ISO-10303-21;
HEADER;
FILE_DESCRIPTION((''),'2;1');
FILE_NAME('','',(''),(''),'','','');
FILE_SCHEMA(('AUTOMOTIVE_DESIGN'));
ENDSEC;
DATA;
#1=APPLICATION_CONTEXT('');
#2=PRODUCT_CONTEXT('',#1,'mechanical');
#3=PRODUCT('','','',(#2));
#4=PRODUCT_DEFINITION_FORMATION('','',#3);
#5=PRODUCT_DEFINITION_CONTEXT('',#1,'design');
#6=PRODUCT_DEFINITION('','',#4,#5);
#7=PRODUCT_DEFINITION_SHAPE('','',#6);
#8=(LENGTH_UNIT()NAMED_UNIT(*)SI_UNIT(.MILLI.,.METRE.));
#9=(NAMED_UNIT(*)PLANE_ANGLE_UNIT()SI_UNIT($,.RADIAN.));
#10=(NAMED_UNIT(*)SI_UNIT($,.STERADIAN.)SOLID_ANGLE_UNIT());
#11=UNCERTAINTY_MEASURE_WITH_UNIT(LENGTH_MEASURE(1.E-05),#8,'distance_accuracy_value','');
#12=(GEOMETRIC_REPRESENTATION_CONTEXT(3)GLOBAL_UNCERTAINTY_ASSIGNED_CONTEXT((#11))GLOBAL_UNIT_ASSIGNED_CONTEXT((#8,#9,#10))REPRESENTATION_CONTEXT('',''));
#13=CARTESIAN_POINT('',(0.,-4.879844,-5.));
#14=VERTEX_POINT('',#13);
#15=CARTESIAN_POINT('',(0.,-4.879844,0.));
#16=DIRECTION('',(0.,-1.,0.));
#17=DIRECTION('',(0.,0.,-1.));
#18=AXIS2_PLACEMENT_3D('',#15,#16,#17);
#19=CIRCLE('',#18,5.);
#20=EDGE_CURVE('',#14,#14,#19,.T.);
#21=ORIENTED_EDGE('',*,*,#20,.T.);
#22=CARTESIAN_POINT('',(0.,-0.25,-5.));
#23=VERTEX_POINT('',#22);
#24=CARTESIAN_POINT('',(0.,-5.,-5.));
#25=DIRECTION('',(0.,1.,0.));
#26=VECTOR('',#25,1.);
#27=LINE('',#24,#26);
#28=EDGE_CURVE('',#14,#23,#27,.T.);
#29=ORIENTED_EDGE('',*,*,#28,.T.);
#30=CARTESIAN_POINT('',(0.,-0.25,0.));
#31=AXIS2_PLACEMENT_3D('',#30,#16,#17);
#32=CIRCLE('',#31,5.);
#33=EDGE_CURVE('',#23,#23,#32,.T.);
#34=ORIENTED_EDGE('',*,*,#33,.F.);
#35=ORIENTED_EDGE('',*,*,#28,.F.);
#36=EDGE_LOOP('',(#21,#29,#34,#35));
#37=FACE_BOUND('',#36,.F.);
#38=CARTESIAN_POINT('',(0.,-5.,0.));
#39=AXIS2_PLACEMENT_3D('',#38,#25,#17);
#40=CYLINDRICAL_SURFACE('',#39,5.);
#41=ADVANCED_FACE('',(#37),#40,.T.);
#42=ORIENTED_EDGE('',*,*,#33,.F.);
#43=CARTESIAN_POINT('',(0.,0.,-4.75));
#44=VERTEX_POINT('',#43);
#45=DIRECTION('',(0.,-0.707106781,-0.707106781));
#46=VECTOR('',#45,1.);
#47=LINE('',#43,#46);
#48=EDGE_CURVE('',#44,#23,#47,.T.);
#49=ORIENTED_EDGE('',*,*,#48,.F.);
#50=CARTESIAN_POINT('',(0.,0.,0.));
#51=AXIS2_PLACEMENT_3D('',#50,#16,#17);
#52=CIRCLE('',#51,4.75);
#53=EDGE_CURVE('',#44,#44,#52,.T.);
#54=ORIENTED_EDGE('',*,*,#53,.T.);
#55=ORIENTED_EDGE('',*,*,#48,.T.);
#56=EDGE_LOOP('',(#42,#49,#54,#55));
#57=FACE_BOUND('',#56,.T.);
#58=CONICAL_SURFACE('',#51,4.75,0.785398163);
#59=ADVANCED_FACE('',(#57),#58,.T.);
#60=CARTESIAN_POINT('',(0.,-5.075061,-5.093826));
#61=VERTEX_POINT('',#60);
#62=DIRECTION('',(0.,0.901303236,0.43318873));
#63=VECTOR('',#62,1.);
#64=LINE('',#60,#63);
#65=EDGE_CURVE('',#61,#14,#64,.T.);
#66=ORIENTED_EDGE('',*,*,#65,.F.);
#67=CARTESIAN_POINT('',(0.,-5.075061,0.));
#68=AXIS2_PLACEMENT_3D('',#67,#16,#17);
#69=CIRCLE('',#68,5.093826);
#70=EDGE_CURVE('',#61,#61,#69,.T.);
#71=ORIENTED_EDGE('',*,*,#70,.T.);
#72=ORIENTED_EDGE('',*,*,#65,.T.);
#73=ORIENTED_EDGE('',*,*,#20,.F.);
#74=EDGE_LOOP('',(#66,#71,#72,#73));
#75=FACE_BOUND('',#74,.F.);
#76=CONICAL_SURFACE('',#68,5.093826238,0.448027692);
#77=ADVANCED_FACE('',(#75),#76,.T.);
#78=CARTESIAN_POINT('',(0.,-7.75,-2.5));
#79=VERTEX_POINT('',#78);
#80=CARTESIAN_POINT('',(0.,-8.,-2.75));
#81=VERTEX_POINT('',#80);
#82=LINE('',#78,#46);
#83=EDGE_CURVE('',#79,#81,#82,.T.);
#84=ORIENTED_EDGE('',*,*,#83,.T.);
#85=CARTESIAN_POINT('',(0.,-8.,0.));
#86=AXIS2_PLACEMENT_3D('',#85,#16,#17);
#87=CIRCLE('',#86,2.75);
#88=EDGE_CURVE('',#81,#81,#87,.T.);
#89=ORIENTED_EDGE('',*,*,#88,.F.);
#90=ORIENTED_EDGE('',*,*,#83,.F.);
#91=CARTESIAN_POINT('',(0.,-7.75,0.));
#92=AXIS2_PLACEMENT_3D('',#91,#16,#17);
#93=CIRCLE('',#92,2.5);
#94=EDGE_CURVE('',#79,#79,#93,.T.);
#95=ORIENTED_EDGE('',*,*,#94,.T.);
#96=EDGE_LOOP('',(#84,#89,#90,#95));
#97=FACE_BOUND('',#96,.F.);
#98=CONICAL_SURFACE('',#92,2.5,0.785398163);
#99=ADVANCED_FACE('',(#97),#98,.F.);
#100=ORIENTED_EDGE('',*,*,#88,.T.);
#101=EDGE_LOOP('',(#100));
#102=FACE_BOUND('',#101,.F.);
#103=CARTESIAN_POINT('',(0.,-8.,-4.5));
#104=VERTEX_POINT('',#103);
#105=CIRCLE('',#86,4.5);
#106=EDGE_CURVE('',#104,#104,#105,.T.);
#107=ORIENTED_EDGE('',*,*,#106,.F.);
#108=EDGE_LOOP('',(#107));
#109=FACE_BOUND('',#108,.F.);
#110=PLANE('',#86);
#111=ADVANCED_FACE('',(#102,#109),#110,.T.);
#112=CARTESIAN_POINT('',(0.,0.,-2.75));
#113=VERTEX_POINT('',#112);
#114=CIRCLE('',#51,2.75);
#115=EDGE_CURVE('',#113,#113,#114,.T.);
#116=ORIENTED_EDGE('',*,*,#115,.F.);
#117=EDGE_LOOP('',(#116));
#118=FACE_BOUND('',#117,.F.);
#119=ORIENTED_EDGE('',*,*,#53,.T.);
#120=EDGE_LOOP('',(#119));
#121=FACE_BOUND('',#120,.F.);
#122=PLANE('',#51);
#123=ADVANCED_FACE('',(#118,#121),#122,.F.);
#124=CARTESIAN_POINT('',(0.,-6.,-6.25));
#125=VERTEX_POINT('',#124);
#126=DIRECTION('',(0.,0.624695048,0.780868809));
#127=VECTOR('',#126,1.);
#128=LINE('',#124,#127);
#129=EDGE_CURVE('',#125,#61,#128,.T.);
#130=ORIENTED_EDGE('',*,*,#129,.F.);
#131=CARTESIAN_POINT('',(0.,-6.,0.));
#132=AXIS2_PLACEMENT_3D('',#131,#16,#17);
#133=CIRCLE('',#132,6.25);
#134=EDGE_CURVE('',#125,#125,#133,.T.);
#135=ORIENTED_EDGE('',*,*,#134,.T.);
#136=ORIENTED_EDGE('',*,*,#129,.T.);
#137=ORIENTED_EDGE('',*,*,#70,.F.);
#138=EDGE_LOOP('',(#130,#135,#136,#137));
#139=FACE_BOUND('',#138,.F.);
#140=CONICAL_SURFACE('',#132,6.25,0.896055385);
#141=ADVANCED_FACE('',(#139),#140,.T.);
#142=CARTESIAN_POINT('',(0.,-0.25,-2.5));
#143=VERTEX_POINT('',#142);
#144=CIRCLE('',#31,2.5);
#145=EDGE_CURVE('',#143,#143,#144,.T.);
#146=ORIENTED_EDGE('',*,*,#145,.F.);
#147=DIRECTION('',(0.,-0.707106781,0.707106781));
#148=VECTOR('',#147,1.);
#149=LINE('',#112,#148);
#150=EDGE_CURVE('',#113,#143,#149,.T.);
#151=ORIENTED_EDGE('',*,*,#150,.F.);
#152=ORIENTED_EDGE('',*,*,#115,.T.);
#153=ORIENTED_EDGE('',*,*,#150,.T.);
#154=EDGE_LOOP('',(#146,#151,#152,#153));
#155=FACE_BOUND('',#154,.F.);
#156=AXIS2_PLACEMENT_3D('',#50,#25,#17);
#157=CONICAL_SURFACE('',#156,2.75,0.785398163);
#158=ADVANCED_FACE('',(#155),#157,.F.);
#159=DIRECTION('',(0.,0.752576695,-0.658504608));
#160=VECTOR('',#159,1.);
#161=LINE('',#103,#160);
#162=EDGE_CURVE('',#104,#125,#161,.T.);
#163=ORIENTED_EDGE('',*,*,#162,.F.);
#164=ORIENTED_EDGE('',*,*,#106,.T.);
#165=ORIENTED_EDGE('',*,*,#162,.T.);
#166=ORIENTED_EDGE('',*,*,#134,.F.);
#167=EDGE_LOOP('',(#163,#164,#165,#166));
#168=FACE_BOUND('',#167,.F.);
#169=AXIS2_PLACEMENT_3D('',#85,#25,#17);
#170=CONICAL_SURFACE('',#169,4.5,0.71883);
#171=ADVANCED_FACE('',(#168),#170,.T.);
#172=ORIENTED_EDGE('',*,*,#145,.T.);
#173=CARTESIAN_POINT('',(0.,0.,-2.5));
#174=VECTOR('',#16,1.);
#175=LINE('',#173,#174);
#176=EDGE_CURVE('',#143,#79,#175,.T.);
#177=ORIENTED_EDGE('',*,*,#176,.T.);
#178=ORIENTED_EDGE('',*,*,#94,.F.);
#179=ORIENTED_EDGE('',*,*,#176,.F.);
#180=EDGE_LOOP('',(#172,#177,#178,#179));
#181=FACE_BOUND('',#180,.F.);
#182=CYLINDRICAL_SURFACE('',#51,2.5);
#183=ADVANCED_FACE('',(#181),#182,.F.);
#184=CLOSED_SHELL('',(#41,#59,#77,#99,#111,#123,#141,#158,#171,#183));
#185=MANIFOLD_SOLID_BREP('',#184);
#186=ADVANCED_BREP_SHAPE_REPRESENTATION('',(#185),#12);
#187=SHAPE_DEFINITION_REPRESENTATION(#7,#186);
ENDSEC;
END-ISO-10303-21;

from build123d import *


# Not quite as in the source:
# - a fillet or chamfer that OpenCascade refuses, or shapes differently, is made with other operations: its cross-section is extruded or revolved along the edge and cut away or added


with BuildPart() as f1:
    # F0 (on Right) → F1 (revolve)
    with BuildSketch(Plane.YZ):
        Polygon((0, -5), (0, -2.5), (-8, -2.5), (-8, -4.5), (-6, -6.25), (-5, -5), align=None)
    revolve(axis=Axis((0, -4, 0), (0, -1, 0)))

    # F2: chamfer of 0.25 on 4 edges, made by hand

    # F2_s1 → F2_t2 (revolve)
    with BuildSketch(Plane.YZ):
        Polygon((-5.0750609905, -5.0938262381), (-4.8798437881, -5), (-5, -5), align=None)
    revolve(axis=Axis((0, -5, 0), (0, -1, 0)))

    # F2_s3 → F2_t4 (revolve, cut)
    with BuildSketch(Plane.YZ):
        Polygon((-7.75, -2.5), (-8, -2.75), (-8, -2.5), align=None)
    revolve(axis=Axis((0, -8, 0), (0, -1, 0)), mode=Mode.SUBTRACT)

    # F2_s5 → F2_t6 (revolve, cut)
    with BuildSketch(Plane.YZ):
        Polygon((0, -2.75), (-0.25, -2.5), (0, -2.5), align=None)
    revolve(axis=Axis((0, 0, 0), (0, -1, 0)), mode=Mode.SUBTRACT)

    # F2_s7 → F2_t8 (revolve, cut)
    with BuildSketch(Plane.YZ):
        Polygon((0, -4.75), (-0.25, -5), (0, -5), align=None)
    revolve(axis=Axis((0, 0, 0), (0, -1, 0)), mode=Mode.SUBTRACT)


solid = f1.part
